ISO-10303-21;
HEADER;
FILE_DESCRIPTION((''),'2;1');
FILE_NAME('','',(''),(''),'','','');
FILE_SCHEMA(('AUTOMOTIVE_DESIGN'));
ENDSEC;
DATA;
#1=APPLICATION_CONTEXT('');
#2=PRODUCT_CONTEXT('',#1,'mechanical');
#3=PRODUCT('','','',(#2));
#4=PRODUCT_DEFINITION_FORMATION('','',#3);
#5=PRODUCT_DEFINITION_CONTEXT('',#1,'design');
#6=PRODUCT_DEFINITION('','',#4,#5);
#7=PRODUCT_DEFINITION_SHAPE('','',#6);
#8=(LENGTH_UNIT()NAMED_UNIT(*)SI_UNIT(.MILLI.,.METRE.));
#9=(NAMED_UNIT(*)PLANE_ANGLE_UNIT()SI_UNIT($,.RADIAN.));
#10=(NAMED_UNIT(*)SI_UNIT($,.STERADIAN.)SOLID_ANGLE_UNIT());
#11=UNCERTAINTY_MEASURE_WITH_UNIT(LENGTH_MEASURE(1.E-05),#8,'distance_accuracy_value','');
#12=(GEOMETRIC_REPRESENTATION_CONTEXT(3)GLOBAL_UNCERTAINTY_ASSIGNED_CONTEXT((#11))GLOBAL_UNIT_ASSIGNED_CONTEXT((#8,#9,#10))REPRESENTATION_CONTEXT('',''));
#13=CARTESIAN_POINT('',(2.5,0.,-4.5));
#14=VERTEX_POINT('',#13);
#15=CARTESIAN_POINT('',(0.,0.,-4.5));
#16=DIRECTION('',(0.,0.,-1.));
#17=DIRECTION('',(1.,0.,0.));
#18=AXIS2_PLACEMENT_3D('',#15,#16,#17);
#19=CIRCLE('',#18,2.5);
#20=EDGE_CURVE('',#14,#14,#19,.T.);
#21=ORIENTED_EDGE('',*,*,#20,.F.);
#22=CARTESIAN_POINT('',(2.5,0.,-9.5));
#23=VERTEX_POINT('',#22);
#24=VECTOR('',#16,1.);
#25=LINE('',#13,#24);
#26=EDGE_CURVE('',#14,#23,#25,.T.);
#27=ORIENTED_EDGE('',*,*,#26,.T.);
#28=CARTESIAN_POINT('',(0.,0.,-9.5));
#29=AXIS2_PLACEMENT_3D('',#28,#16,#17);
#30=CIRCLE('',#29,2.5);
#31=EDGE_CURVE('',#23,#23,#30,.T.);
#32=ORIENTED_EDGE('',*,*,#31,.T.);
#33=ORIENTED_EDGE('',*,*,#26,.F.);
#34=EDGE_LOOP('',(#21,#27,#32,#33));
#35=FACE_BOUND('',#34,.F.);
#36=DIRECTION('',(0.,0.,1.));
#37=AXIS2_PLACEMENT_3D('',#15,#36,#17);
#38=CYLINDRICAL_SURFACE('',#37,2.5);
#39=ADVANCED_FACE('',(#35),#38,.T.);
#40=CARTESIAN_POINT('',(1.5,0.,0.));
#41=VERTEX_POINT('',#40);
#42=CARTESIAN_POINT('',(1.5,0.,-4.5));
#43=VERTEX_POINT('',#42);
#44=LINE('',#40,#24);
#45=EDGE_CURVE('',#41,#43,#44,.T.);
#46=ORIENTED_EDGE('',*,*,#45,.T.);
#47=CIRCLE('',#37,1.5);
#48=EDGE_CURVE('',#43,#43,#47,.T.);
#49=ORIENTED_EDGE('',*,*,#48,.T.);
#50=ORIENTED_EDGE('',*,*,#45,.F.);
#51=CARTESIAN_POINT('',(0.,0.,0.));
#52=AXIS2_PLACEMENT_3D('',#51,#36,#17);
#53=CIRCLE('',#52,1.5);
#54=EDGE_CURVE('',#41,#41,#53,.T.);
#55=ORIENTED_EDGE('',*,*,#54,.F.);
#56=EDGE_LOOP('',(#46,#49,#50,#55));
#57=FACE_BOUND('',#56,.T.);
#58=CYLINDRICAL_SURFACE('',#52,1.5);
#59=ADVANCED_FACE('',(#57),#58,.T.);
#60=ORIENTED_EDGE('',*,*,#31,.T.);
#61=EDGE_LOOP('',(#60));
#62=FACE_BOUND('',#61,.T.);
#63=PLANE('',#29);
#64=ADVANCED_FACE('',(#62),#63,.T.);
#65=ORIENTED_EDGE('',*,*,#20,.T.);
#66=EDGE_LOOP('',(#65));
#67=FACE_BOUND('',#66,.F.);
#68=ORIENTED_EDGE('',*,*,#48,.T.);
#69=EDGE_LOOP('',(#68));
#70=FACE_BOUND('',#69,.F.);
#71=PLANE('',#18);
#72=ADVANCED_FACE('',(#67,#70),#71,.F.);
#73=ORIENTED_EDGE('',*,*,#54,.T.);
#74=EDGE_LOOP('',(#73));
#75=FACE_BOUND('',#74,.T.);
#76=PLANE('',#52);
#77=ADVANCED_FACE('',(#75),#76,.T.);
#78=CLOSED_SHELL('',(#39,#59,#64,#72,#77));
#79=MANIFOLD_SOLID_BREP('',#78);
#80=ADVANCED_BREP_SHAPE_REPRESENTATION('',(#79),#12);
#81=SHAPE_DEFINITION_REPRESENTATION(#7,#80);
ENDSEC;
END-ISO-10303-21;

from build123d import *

# Parameters (mm, degrees)
F0_R     = 1.5
F0_R_2   = 0.5
F1_DEPTH = 4.5
F2_R     = 2.5
F2_R_2   = 1.5
F3_DEPTH = 5


with BuildPart() as f1:
    # F0 (on Top) → F1 (new body)
    with BuildSketch(Plane.XY):
        Circle(F0_R)
        Circle(F0_R_2, mode=Mode.SUBTRACT)
        Circle(F0_R_2)
    extrude(amount=-F1_DEPTH)

    # F2 (on face) → F3 (join)
    with BuildSketch(Plane(origin=(0, 0, -4.5), x_dir=(1, 0, 0), z_dir=(0, 0, -1))):
        Circle(F2_R)
        Circle(F2_R_2, mode=Mode.SUBTRACT)
        Circle(F2_R_2)
    extrude(amount=F3_DEPTH)


solid = f1.part
